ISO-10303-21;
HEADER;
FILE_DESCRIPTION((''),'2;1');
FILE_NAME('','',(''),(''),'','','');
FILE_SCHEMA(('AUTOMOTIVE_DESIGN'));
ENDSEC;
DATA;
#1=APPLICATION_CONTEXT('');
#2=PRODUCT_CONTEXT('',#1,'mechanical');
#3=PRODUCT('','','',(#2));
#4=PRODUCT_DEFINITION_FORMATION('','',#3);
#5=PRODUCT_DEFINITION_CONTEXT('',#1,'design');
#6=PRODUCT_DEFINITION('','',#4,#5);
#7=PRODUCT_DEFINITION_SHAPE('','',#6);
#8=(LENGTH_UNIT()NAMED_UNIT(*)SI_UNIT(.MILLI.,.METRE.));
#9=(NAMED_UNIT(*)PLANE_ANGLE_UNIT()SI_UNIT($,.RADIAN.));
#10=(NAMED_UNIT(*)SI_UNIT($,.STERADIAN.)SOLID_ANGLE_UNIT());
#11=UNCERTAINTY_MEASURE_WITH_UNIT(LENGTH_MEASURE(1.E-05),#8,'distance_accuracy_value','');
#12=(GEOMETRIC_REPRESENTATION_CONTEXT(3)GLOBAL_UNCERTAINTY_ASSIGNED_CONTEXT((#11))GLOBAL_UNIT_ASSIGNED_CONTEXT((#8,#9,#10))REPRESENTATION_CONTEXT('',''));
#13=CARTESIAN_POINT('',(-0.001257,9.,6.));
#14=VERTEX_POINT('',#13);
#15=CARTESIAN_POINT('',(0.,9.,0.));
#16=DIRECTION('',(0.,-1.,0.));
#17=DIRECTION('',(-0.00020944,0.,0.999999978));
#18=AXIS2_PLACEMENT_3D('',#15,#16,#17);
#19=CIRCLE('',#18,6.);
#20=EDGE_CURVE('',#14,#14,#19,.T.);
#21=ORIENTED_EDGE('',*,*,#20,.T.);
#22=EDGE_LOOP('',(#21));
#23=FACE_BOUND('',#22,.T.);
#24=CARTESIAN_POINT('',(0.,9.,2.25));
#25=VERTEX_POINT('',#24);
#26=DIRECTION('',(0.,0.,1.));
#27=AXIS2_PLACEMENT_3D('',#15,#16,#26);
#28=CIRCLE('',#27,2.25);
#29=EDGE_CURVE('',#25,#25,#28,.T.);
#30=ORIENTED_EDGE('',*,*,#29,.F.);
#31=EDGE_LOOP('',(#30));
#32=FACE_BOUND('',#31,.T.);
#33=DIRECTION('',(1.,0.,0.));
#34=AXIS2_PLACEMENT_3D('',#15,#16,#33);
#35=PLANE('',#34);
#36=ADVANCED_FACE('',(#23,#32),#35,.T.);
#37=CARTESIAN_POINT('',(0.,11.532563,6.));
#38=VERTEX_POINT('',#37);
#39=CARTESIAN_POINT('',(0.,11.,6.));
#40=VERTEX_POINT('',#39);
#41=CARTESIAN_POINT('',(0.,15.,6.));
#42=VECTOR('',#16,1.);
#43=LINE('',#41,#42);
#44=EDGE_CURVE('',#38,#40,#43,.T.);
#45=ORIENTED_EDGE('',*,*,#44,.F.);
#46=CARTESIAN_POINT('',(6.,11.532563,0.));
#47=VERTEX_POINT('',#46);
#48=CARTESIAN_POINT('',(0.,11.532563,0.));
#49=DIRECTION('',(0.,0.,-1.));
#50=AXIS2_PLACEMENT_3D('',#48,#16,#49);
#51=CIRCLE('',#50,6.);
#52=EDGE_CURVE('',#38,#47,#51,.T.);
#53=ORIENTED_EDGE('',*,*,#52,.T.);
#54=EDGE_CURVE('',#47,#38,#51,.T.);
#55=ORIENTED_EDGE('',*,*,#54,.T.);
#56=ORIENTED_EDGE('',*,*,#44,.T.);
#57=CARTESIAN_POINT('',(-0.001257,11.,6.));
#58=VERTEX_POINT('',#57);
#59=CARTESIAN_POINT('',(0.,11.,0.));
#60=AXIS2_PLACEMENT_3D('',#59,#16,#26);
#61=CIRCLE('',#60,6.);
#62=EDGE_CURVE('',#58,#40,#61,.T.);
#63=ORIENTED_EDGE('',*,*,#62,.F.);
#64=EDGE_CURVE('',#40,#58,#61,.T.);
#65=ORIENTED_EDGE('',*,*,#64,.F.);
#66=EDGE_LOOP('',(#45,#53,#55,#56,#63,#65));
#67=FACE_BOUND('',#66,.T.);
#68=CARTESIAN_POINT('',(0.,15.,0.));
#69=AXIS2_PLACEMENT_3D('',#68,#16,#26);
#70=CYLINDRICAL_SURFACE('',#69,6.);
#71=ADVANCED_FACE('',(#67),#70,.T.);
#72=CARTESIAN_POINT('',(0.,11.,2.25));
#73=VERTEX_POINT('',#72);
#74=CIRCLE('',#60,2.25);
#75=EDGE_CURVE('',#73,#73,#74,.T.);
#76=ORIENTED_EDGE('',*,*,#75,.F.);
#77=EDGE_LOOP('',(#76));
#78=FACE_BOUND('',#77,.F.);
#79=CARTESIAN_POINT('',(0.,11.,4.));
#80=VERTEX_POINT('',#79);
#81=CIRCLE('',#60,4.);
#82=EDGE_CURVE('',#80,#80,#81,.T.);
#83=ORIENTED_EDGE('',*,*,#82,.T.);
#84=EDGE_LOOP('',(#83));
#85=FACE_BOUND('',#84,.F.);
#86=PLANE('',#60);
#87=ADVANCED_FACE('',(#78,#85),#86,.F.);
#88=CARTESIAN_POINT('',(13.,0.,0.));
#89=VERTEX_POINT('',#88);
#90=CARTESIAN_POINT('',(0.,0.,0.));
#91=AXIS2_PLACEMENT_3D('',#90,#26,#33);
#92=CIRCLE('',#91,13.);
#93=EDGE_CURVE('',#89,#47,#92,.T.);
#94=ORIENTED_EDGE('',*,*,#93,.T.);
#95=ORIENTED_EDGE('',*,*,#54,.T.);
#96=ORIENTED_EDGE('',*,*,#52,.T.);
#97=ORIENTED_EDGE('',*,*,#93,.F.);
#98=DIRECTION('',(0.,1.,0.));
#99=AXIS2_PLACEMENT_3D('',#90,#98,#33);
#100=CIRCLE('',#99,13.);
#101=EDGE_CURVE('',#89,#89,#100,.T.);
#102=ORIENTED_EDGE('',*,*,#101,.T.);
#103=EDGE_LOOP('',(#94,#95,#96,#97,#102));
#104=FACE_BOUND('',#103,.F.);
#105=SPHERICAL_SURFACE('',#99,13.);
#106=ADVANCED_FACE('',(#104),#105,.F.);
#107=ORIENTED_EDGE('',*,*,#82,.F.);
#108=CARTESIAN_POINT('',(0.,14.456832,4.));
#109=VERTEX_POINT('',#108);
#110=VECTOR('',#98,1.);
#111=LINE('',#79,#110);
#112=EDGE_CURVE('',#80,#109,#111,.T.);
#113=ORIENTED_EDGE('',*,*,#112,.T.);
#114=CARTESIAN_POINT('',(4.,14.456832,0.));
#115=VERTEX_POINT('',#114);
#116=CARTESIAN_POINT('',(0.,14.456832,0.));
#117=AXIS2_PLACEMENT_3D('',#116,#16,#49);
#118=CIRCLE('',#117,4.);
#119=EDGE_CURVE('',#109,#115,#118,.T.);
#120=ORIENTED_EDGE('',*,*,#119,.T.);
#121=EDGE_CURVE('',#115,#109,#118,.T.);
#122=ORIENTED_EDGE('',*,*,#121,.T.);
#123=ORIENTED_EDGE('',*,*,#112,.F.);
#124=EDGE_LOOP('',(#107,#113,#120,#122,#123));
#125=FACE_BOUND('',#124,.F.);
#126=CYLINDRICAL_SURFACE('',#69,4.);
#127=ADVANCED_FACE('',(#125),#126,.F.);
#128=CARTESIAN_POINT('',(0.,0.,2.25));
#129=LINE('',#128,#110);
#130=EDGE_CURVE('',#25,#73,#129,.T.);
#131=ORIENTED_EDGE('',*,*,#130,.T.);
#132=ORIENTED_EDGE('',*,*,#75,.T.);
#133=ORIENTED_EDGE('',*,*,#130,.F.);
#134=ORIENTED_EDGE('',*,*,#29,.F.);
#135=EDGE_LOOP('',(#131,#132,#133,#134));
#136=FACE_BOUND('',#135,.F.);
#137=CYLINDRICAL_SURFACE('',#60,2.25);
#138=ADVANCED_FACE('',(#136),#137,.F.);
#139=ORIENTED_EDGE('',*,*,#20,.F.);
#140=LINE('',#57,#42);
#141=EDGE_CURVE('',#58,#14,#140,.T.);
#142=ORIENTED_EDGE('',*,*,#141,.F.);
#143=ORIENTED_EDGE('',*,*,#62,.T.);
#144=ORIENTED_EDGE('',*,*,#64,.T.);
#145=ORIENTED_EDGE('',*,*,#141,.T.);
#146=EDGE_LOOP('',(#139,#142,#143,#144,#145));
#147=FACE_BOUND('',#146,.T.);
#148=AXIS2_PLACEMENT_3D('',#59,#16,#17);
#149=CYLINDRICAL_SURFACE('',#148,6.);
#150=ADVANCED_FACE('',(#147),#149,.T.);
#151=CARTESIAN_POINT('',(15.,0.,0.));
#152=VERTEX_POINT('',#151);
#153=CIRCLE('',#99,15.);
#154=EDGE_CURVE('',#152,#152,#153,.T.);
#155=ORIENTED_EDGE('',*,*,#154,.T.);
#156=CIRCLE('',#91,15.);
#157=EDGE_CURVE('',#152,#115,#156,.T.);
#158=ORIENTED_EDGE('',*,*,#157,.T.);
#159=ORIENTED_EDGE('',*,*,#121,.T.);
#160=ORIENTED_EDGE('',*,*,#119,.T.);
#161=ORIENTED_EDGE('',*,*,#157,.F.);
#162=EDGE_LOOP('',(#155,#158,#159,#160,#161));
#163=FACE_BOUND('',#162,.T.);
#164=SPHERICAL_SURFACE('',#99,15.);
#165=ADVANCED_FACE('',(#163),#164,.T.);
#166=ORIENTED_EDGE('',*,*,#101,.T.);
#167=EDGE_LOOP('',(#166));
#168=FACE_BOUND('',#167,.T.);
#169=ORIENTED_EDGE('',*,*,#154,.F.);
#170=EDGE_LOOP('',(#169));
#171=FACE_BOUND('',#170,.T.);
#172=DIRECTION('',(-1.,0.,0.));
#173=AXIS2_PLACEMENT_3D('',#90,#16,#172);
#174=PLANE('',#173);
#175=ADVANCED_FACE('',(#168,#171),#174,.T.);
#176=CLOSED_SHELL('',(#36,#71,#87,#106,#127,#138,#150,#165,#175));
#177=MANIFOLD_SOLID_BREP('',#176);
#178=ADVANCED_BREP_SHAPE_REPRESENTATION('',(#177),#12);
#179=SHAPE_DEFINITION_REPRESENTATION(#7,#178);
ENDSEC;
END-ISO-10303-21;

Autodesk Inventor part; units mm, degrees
ref_plane "YZ Plane" through (0, 0, 0) normal (1, 0, 0) x (0, 1, 0)
ref_plane "XY Plane" through (0, 0, 0) normal (0, 0, 1) x (1, 0, 0)
sketch "Sketch1" plane through (0, 0, 0) normal (0, 0, 1) x (1, 0, 0)
  line L0 (0, 0) -> (0, 15)
  line L1 (0, 0) -> (15, 0)
  arc A0 (15, 0) -> (0, 15) centre (0, 0) ccw
  line L2 (0, -3.6213) -> (0, 21.7279) projected
  dimension "d2" = 15
revolve "Revolution1" add sketch "Sketch1" angle 360 about axis through (0, -10, 0) along (0, 1, 0)
ref_plane "Work Plane1" through (0, 15, 0) normal (0, 1, 0) x (-1, 0, 0)
sketch "Sketch2" plane through (0, 15, 0) normal (0, 1, 0) x (-1, 0, 0)
  point P0 (0, 0)
  point P1 (0, 0)
hole "Hole1" at (0, 15, 0) direction (0, -1, 0) diameter 4.5 end through all counterbore diameter 8 counterbore depth 4 clearance for "Socket Head Cap Screw" size "M4" standard "Ansi Metric M Profile"
shell "Shell1" thickness 2 removed faces 1 at (10.5992, 0, 1.287)
sketch "Sketch3" plane through (0, 0, 0) normal (0, -1, 0) x (1, 0, 0)
  circle A0 centre (0, 0) radius 4.25 projected
  circle A1 centre (0, 0) radius 2.25 projected
extrude "Extrusion1" cut sketch "Sketch3" against normal blind 9
properties part number "Ball_Upper Half" material "Nylon 6/6"
